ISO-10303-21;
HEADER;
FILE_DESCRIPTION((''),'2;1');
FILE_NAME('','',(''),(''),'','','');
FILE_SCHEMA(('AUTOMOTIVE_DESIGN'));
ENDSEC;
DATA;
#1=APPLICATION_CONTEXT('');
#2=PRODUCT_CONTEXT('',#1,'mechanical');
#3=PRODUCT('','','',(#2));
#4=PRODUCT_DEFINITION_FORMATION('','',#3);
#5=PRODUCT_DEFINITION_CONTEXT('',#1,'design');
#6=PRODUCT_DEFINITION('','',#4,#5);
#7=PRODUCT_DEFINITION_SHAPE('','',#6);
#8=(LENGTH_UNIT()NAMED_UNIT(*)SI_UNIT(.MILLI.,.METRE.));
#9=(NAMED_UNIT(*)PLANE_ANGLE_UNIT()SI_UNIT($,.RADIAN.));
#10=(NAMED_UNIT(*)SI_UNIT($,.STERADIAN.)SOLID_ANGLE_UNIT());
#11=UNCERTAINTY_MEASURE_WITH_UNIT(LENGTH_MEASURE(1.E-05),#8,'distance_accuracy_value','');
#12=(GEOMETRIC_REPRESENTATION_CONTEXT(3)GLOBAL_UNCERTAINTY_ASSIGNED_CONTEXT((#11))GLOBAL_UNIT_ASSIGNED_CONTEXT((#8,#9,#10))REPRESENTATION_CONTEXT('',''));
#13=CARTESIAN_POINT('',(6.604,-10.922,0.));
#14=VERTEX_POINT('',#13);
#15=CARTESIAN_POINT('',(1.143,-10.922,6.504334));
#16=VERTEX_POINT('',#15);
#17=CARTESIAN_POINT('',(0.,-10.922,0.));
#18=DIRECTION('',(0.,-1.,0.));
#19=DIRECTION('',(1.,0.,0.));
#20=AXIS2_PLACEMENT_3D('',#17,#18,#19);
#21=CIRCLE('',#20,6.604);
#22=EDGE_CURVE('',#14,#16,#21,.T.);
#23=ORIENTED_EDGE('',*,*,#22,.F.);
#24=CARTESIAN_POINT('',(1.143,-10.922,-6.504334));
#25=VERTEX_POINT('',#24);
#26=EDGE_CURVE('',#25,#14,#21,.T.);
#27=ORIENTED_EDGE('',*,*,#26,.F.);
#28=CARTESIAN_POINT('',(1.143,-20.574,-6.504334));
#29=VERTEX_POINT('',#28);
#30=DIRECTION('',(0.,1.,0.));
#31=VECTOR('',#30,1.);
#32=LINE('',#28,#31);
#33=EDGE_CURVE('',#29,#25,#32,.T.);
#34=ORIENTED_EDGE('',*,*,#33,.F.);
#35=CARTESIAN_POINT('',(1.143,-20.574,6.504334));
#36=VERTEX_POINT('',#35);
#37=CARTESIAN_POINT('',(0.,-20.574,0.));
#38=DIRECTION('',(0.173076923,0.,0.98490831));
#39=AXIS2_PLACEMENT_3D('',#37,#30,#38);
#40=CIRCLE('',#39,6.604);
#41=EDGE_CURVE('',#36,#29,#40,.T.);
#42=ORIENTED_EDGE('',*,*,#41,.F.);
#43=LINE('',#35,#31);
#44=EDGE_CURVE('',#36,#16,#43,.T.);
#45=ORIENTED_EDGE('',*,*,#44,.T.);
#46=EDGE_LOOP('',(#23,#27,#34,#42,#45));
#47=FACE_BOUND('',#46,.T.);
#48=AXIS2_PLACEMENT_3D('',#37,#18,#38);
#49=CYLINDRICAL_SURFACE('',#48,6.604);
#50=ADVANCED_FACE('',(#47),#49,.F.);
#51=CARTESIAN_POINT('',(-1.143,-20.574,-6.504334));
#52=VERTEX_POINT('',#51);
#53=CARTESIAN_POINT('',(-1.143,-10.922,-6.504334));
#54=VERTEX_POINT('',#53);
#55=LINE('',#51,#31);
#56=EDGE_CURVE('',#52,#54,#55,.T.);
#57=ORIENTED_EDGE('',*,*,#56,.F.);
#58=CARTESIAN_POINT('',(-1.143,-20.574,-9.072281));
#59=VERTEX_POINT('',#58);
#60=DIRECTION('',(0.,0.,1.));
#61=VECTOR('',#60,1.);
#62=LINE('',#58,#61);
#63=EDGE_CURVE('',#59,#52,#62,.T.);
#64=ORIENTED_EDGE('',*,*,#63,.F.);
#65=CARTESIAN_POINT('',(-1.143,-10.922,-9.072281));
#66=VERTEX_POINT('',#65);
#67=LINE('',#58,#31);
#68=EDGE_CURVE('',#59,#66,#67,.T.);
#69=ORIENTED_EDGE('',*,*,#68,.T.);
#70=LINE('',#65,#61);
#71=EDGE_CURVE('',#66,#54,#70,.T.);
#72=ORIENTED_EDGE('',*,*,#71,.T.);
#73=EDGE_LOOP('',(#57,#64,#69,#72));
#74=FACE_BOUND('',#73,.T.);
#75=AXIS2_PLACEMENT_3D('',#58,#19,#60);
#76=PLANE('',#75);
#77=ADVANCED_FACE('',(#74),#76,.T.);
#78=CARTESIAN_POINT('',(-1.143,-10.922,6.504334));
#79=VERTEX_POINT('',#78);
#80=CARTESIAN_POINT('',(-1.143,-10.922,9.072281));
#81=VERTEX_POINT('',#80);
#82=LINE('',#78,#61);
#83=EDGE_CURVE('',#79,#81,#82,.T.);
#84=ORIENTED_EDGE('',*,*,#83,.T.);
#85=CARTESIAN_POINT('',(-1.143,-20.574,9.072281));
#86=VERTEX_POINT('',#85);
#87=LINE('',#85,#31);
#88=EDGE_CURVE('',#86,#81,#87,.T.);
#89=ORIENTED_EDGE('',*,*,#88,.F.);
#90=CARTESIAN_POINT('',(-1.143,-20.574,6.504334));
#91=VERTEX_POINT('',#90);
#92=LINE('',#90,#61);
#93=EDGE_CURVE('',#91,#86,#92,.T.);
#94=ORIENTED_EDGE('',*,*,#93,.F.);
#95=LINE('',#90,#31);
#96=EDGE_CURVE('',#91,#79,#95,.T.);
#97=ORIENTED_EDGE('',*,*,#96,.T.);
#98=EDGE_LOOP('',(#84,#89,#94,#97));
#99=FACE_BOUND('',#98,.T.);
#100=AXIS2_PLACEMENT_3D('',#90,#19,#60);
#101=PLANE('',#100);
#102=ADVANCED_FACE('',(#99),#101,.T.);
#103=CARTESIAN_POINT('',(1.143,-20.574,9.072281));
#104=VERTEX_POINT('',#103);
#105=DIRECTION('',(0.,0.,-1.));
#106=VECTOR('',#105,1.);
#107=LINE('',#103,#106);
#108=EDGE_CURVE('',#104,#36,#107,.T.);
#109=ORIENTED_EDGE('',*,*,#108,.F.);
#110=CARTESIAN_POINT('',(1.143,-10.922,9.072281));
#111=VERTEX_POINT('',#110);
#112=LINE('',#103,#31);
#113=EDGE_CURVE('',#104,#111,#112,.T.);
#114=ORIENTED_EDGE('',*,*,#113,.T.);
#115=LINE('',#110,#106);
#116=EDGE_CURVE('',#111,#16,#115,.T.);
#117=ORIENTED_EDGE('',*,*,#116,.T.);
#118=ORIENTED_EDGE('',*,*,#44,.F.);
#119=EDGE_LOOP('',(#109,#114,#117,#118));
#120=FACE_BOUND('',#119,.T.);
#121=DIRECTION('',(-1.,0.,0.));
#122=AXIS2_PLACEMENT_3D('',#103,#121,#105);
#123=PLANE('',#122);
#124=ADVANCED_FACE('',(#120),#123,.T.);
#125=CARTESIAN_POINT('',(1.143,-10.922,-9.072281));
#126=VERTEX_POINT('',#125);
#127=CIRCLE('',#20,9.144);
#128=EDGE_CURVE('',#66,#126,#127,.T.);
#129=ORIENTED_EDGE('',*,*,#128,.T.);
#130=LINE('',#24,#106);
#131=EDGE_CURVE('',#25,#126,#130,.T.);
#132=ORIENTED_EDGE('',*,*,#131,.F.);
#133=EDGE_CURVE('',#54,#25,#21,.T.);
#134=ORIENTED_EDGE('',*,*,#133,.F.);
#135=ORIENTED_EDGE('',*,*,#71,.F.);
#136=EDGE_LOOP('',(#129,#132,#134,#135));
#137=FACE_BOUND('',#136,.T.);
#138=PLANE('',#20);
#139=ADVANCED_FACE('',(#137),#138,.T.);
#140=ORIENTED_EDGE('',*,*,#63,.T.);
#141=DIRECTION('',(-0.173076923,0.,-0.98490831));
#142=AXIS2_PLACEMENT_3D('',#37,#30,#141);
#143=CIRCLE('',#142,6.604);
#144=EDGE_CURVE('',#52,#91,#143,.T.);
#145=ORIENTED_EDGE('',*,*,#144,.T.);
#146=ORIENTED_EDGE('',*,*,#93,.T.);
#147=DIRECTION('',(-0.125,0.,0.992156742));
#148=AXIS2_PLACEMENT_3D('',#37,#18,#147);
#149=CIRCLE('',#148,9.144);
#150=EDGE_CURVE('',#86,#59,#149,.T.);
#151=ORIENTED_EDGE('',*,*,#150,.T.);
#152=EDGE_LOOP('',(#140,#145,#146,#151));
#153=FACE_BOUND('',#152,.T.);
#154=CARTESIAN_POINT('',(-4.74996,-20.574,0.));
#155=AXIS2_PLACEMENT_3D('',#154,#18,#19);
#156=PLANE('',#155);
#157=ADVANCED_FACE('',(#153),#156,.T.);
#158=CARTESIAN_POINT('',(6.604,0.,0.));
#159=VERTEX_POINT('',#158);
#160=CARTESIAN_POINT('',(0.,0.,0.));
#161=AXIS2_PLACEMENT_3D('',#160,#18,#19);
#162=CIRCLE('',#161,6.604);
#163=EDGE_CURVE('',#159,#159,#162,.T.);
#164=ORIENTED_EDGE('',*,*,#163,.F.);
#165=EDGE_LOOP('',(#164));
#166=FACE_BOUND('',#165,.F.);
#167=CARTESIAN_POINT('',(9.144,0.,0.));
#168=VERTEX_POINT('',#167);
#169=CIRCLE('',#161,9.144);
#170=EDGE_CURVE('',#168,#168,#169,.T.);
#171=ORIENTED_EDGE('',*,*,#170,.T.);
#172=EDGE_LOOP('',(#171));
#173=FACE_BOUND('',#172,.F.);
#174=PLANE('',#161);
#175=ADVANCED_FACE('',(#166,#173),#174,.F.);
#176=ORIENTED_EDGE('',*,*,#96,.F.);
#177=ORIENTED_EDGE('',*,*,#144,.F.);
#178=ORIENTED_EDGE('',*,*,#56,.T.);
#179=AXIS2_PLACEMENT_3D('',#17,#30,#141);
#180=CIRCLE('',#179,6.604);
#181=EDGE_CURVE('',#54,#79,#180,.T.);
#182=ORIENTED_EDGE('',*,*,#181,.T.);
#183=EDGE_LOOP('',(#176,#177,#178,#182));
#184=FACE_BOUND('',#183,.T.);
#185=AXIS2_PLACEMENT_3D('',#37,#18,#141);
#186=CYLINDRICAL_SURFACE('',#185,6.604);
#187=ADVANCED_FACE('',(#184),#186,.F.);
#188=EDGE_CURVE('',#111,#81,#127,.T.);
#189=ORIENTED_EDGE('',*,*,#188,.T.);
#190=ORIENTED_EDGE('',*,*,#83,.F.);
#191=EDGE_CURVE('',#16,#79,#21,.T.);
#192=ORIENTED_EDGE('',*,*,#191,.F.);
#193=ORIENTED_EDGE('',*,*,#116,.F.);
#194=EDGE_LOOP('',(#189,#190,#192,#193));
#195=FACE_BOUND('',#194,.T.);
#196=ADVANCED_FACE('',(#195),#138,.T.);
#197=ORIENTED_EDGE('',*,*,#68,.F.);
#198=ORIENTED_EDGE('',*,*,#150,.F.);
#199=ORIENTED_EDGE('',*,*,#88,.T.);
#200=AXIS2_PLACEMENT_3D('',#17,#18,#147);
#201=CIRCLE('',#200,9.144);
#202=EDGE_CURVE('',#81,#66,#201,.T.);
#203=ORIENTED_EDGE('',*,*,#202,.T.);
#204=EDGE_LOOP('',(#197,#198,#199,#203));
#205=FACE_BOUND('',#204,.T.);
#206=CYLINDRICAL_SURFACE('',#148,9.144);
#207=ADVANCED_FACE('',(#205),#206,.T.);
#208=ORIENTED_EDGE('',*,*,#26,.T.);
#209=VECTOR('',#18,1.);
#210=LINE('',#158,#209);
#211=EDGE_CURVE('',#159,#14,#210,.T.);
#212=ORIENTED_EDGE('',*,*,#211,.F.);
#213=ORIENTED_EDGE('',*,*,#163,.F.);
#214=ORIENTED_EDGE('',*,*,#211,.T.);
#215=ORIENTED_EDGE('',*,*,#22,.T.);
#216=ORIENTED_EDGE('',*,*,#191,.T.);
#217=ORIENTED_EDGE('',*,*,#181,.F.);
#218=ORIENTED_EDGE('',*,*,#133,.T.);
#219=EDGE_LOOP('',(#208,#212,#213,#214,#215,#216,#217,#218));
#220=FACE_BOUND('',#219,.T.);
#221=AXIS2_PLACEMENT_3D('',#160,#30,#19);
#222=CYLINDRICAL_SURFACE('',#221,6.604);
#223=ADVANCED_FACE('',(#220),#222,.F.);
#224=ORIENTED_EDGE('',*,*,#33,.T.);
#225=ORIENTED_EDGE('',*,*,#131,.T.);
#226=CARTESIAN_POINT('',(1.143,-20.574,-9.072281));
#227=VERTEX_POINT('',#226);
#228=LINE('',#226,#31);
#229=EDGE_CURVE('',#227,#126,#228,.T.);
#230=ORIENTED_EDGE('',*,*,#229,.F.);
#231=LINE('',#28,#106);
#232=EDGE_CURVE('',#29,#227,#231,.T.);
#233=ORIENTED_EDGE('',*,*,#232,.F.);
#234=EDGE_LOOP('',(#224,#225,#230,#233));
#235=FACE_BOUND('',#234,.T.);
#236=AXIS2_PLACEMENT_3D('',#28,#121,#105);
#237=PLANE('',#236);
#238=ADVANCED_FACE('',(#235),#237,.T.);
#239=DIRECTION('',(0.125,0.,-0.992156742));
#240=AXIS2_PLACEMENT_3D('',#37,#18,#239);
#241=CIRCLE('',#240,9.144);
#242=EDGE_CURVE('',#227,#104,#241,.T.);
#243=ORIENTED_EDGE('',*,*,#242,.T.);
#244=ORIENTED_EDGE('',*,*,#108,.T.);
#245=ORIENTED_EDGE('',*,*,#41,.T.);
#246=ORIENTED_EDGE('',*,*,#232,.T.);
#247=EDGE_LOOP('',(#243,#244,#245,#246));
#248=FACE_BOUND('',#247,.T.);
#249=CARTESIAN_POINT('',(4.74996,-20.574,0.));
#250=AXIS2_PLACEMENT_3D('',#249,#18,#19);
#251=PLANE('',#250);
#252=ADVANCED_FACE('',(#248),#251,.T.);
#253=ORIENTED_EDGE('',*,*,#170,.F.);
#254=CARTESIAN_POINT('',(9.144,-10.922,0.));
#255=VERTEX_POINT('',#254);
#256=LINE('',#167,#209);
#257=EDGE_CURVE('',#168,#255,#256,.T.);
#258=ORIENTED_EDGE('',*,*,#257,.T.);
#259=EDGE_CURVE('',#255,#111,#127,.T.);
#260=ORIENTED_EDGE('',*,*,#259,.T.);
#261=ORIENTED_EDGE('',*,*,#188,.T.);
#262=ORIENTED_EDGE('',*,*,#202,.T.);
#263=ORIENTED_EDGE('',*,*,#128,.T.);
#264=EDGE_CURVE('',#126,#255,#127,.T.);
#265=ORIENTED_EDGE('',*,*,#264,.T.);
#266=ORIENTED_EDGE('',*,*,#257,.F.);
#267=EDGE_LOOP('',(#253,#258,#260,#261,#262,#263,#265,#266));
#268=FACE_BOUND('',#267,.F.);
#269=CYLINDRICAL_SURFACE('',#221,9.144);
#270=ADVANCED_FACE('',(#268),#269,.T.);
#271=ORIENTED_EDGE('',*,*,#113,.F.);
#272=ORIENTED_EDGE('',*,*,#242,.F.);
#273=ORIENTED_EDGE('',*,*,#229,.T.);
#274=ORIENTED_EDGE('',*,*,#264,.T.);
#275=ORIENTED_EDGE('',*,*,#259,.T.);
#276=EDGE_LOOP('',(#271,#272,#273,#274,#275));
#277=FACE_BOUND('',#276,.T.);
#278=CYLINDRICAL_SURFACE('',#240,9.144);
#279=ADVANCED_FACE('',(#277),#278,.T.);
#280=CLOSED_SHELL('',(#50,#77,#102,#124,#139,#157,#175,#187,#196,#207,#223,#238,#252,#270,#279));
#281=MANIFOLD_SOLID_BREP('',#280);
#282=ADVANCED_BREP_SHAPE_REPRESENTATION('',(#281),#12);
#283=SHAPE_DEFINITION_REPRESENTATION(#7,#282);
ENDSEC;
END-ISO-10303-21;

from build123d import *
from build123d import SkipClean  # not in build123d's __all__

# Parameters (mm, degrees)
F0_R     = 9.144
F0_R_2   = 6.604
F1_DEPTH = 10.922
F4_DEPTH = 9.652


with BuildPart() as f1:
    # F0 (on Front) → F1 (new body)
    with BuildSketch(Plane.XZ):
        Circle(F0_R)
        Circle(F0_R_2, mode=Mode.SUBTRACT)
    extrude(amount=F1_DEPTH)

    # F3 (on offset) → F4 (join)
    with BuildSketch(Plane.XZ.offset(20.574)):
        with BuildLine():
            Line((-1.143, 6.5043344779), (-1.143, 9.0722812456))
            ThreePointArc((-1.143, 9.0722812456), (-9.144, 0), (-1.143, -9.0722812456))
            Line((-1.143, -9.0722812456), (-1.143, -6.5043344779))
            ThreePointArc((-1.143, -6.5043344779), (-6.604, 0), (-1.143, 6.5043344779))
        make_face()
        with BuildLine():
            ThreePointArc((1.143, -9.0722812456), (9.144, 0), (1.143, 9.0722812456))
            Line((1.143, 9.0722812456), (1.143, 6.5043344779))
            ThreePointArc((1.143, 6.5043344779), (6.604, 0), (1.143, -6.5043344779))
            Line((1.143, -6.5043344779), (1.143, -9.0722812456))
        make_face()
    with SkipClean():  # cleaning this boolean's faces spoils the solid; the shape is the same uncleaned
        extrude(amount=-F4_DEPTH)


solid = f1.part
